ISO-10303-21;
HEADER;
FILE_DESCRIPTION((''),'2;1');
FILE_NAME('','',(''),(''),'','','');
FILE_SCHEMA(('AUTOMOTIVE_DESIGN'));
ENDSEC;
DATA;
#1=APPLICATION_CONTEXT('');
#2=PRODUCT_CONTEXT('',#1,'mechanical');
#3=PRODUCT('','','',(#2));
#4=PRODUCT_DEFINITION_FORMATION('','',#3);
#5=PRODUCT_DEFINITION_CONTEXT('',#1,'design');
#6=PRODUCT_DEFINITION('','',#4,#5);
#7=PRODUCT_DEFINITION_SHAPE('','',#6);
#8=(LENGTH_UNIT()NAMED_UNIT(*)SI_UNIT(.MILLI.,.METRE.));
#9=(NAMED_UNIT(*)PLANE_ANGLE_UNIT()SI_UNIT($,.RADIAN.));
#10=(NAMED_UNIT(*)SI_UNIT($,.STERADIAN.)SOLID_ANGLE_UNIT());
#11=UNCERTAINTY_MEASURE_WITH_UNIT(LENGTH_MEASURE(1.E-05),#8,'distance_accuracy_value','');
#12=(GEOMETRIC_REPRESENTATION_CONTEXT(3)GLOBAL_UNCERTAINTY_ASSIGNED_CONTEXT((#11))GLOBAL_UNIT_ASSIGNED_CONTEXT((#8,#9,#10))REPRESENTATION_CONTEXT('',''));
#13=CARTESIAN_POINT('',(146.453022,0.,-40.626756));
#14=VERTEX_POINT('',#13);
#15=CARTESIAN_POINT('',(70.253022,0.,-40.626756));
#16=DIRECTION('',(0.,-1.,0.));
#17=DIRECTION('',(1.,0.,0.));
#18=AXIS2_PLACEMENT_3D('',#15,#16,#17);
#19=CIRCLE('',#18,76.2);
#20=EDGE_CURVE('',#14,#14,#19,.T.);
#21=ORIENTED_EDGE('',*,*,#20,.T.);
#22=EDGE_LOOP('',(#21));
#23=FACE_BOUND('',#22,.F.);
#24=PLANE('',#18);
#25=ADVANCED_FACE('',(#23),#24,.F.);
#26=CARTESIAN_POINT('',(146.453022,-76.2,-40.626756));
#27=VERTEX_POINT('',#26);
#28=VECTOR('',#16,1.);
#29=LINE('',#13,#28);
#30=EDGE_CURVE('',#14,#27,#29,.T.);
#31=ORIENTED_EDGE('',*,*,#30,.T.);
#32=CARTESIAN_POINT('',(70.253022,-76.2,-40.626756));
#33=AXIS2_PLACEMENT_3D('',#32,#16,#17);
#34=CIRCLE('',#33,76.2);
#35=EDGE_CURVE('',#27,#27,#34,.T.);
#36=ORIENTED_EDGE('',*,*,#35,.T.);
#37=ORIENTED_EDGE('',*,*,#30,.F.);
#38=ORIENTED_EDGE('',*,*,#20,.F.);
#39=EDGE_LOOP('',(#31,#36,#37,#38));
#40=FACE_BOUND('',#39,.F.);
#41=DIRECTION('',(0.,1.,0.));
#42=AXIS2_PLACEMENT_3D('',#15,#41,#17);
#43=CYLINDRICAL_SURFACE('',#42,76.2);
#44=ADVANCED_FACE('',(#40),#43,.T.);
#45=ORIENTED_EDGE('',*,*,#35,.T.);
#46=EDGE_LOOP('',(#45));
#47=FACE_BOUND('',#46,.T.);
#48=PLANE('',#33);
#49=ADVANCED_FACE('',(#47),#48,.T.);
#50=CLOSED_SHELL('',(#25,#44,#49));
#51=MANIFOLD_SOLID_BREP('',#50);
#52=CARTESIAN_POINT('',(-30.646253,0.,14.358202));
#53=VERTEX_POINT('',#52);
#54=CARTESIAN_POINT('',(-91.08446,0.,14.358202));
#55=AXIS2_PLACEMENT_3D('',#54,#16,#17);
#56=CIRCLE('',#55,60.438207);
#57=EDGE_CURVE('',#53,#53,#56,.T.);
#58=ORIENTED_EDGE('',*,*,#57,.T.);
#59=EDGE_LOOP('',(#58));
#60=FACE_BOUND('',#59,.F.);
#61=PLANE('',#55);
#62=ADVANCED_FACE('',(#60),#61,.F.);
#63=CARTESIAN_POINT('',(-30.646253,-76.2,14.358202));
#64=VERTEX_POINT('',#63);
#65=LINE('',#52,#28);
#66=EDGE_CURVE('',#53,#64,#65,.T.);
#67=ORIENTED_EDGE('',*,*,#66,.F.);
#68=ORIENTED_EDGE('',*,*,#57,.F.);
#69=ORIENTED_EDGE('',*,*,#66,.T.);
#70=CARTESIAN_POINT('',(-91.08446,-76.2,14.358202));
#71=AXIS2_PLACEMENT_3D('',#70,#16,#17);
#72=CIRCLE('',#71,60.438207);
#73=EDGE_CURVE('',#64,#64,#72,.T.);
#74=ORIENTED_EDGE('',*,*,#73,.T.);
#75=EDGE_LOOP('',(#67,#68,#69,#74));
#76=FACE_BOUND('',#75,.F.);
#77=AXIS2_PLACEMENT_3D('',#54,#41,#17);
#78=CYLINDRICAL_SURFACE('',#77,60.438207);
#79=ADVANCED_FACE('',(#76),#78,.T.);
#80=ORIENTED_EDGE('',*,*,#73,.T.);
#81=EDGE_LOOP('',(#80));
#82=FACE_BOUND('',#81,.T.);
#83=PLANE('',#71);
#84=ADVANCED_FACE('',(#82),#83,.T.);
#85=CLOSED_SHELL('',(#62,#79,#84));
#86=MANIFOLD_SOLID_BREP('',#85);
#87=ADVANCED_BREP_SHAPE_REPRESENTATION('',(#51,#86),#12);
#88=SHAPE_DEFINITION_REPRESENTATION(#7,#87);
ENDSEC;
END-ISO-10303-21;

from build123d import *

# Parameters (mm, degrees)
F0_R     = 76.2
F1_DEPTH = 76.2
F0_R_2   = 60.4382074191


# Not quite as in the source:
# - the program builds the solid bodies; features that only make, move or delete a surface that nothing else refers to are left out


with BuildPart() as f1:
    # F0 (on Front) → F1 (new body)
    with BuildSketch(Plane.XZ):
        with Locations((70.2530217951, -40.6267557943)):
            Circle(F0_R)
    extrude(amount=F1_DEPTH)


with BuildPart() as f1b:
    # F0 (on Front) → F1, piece 2 (new body)
    with BuildSketch(Plane.XZ):
        with Locations((-91.0844604408, 14.3582018072)):
            Circle(F0_R_2)
    extrude(amount=F1_DEPTH)


solid = Compound([f1.part, f1b.part])
